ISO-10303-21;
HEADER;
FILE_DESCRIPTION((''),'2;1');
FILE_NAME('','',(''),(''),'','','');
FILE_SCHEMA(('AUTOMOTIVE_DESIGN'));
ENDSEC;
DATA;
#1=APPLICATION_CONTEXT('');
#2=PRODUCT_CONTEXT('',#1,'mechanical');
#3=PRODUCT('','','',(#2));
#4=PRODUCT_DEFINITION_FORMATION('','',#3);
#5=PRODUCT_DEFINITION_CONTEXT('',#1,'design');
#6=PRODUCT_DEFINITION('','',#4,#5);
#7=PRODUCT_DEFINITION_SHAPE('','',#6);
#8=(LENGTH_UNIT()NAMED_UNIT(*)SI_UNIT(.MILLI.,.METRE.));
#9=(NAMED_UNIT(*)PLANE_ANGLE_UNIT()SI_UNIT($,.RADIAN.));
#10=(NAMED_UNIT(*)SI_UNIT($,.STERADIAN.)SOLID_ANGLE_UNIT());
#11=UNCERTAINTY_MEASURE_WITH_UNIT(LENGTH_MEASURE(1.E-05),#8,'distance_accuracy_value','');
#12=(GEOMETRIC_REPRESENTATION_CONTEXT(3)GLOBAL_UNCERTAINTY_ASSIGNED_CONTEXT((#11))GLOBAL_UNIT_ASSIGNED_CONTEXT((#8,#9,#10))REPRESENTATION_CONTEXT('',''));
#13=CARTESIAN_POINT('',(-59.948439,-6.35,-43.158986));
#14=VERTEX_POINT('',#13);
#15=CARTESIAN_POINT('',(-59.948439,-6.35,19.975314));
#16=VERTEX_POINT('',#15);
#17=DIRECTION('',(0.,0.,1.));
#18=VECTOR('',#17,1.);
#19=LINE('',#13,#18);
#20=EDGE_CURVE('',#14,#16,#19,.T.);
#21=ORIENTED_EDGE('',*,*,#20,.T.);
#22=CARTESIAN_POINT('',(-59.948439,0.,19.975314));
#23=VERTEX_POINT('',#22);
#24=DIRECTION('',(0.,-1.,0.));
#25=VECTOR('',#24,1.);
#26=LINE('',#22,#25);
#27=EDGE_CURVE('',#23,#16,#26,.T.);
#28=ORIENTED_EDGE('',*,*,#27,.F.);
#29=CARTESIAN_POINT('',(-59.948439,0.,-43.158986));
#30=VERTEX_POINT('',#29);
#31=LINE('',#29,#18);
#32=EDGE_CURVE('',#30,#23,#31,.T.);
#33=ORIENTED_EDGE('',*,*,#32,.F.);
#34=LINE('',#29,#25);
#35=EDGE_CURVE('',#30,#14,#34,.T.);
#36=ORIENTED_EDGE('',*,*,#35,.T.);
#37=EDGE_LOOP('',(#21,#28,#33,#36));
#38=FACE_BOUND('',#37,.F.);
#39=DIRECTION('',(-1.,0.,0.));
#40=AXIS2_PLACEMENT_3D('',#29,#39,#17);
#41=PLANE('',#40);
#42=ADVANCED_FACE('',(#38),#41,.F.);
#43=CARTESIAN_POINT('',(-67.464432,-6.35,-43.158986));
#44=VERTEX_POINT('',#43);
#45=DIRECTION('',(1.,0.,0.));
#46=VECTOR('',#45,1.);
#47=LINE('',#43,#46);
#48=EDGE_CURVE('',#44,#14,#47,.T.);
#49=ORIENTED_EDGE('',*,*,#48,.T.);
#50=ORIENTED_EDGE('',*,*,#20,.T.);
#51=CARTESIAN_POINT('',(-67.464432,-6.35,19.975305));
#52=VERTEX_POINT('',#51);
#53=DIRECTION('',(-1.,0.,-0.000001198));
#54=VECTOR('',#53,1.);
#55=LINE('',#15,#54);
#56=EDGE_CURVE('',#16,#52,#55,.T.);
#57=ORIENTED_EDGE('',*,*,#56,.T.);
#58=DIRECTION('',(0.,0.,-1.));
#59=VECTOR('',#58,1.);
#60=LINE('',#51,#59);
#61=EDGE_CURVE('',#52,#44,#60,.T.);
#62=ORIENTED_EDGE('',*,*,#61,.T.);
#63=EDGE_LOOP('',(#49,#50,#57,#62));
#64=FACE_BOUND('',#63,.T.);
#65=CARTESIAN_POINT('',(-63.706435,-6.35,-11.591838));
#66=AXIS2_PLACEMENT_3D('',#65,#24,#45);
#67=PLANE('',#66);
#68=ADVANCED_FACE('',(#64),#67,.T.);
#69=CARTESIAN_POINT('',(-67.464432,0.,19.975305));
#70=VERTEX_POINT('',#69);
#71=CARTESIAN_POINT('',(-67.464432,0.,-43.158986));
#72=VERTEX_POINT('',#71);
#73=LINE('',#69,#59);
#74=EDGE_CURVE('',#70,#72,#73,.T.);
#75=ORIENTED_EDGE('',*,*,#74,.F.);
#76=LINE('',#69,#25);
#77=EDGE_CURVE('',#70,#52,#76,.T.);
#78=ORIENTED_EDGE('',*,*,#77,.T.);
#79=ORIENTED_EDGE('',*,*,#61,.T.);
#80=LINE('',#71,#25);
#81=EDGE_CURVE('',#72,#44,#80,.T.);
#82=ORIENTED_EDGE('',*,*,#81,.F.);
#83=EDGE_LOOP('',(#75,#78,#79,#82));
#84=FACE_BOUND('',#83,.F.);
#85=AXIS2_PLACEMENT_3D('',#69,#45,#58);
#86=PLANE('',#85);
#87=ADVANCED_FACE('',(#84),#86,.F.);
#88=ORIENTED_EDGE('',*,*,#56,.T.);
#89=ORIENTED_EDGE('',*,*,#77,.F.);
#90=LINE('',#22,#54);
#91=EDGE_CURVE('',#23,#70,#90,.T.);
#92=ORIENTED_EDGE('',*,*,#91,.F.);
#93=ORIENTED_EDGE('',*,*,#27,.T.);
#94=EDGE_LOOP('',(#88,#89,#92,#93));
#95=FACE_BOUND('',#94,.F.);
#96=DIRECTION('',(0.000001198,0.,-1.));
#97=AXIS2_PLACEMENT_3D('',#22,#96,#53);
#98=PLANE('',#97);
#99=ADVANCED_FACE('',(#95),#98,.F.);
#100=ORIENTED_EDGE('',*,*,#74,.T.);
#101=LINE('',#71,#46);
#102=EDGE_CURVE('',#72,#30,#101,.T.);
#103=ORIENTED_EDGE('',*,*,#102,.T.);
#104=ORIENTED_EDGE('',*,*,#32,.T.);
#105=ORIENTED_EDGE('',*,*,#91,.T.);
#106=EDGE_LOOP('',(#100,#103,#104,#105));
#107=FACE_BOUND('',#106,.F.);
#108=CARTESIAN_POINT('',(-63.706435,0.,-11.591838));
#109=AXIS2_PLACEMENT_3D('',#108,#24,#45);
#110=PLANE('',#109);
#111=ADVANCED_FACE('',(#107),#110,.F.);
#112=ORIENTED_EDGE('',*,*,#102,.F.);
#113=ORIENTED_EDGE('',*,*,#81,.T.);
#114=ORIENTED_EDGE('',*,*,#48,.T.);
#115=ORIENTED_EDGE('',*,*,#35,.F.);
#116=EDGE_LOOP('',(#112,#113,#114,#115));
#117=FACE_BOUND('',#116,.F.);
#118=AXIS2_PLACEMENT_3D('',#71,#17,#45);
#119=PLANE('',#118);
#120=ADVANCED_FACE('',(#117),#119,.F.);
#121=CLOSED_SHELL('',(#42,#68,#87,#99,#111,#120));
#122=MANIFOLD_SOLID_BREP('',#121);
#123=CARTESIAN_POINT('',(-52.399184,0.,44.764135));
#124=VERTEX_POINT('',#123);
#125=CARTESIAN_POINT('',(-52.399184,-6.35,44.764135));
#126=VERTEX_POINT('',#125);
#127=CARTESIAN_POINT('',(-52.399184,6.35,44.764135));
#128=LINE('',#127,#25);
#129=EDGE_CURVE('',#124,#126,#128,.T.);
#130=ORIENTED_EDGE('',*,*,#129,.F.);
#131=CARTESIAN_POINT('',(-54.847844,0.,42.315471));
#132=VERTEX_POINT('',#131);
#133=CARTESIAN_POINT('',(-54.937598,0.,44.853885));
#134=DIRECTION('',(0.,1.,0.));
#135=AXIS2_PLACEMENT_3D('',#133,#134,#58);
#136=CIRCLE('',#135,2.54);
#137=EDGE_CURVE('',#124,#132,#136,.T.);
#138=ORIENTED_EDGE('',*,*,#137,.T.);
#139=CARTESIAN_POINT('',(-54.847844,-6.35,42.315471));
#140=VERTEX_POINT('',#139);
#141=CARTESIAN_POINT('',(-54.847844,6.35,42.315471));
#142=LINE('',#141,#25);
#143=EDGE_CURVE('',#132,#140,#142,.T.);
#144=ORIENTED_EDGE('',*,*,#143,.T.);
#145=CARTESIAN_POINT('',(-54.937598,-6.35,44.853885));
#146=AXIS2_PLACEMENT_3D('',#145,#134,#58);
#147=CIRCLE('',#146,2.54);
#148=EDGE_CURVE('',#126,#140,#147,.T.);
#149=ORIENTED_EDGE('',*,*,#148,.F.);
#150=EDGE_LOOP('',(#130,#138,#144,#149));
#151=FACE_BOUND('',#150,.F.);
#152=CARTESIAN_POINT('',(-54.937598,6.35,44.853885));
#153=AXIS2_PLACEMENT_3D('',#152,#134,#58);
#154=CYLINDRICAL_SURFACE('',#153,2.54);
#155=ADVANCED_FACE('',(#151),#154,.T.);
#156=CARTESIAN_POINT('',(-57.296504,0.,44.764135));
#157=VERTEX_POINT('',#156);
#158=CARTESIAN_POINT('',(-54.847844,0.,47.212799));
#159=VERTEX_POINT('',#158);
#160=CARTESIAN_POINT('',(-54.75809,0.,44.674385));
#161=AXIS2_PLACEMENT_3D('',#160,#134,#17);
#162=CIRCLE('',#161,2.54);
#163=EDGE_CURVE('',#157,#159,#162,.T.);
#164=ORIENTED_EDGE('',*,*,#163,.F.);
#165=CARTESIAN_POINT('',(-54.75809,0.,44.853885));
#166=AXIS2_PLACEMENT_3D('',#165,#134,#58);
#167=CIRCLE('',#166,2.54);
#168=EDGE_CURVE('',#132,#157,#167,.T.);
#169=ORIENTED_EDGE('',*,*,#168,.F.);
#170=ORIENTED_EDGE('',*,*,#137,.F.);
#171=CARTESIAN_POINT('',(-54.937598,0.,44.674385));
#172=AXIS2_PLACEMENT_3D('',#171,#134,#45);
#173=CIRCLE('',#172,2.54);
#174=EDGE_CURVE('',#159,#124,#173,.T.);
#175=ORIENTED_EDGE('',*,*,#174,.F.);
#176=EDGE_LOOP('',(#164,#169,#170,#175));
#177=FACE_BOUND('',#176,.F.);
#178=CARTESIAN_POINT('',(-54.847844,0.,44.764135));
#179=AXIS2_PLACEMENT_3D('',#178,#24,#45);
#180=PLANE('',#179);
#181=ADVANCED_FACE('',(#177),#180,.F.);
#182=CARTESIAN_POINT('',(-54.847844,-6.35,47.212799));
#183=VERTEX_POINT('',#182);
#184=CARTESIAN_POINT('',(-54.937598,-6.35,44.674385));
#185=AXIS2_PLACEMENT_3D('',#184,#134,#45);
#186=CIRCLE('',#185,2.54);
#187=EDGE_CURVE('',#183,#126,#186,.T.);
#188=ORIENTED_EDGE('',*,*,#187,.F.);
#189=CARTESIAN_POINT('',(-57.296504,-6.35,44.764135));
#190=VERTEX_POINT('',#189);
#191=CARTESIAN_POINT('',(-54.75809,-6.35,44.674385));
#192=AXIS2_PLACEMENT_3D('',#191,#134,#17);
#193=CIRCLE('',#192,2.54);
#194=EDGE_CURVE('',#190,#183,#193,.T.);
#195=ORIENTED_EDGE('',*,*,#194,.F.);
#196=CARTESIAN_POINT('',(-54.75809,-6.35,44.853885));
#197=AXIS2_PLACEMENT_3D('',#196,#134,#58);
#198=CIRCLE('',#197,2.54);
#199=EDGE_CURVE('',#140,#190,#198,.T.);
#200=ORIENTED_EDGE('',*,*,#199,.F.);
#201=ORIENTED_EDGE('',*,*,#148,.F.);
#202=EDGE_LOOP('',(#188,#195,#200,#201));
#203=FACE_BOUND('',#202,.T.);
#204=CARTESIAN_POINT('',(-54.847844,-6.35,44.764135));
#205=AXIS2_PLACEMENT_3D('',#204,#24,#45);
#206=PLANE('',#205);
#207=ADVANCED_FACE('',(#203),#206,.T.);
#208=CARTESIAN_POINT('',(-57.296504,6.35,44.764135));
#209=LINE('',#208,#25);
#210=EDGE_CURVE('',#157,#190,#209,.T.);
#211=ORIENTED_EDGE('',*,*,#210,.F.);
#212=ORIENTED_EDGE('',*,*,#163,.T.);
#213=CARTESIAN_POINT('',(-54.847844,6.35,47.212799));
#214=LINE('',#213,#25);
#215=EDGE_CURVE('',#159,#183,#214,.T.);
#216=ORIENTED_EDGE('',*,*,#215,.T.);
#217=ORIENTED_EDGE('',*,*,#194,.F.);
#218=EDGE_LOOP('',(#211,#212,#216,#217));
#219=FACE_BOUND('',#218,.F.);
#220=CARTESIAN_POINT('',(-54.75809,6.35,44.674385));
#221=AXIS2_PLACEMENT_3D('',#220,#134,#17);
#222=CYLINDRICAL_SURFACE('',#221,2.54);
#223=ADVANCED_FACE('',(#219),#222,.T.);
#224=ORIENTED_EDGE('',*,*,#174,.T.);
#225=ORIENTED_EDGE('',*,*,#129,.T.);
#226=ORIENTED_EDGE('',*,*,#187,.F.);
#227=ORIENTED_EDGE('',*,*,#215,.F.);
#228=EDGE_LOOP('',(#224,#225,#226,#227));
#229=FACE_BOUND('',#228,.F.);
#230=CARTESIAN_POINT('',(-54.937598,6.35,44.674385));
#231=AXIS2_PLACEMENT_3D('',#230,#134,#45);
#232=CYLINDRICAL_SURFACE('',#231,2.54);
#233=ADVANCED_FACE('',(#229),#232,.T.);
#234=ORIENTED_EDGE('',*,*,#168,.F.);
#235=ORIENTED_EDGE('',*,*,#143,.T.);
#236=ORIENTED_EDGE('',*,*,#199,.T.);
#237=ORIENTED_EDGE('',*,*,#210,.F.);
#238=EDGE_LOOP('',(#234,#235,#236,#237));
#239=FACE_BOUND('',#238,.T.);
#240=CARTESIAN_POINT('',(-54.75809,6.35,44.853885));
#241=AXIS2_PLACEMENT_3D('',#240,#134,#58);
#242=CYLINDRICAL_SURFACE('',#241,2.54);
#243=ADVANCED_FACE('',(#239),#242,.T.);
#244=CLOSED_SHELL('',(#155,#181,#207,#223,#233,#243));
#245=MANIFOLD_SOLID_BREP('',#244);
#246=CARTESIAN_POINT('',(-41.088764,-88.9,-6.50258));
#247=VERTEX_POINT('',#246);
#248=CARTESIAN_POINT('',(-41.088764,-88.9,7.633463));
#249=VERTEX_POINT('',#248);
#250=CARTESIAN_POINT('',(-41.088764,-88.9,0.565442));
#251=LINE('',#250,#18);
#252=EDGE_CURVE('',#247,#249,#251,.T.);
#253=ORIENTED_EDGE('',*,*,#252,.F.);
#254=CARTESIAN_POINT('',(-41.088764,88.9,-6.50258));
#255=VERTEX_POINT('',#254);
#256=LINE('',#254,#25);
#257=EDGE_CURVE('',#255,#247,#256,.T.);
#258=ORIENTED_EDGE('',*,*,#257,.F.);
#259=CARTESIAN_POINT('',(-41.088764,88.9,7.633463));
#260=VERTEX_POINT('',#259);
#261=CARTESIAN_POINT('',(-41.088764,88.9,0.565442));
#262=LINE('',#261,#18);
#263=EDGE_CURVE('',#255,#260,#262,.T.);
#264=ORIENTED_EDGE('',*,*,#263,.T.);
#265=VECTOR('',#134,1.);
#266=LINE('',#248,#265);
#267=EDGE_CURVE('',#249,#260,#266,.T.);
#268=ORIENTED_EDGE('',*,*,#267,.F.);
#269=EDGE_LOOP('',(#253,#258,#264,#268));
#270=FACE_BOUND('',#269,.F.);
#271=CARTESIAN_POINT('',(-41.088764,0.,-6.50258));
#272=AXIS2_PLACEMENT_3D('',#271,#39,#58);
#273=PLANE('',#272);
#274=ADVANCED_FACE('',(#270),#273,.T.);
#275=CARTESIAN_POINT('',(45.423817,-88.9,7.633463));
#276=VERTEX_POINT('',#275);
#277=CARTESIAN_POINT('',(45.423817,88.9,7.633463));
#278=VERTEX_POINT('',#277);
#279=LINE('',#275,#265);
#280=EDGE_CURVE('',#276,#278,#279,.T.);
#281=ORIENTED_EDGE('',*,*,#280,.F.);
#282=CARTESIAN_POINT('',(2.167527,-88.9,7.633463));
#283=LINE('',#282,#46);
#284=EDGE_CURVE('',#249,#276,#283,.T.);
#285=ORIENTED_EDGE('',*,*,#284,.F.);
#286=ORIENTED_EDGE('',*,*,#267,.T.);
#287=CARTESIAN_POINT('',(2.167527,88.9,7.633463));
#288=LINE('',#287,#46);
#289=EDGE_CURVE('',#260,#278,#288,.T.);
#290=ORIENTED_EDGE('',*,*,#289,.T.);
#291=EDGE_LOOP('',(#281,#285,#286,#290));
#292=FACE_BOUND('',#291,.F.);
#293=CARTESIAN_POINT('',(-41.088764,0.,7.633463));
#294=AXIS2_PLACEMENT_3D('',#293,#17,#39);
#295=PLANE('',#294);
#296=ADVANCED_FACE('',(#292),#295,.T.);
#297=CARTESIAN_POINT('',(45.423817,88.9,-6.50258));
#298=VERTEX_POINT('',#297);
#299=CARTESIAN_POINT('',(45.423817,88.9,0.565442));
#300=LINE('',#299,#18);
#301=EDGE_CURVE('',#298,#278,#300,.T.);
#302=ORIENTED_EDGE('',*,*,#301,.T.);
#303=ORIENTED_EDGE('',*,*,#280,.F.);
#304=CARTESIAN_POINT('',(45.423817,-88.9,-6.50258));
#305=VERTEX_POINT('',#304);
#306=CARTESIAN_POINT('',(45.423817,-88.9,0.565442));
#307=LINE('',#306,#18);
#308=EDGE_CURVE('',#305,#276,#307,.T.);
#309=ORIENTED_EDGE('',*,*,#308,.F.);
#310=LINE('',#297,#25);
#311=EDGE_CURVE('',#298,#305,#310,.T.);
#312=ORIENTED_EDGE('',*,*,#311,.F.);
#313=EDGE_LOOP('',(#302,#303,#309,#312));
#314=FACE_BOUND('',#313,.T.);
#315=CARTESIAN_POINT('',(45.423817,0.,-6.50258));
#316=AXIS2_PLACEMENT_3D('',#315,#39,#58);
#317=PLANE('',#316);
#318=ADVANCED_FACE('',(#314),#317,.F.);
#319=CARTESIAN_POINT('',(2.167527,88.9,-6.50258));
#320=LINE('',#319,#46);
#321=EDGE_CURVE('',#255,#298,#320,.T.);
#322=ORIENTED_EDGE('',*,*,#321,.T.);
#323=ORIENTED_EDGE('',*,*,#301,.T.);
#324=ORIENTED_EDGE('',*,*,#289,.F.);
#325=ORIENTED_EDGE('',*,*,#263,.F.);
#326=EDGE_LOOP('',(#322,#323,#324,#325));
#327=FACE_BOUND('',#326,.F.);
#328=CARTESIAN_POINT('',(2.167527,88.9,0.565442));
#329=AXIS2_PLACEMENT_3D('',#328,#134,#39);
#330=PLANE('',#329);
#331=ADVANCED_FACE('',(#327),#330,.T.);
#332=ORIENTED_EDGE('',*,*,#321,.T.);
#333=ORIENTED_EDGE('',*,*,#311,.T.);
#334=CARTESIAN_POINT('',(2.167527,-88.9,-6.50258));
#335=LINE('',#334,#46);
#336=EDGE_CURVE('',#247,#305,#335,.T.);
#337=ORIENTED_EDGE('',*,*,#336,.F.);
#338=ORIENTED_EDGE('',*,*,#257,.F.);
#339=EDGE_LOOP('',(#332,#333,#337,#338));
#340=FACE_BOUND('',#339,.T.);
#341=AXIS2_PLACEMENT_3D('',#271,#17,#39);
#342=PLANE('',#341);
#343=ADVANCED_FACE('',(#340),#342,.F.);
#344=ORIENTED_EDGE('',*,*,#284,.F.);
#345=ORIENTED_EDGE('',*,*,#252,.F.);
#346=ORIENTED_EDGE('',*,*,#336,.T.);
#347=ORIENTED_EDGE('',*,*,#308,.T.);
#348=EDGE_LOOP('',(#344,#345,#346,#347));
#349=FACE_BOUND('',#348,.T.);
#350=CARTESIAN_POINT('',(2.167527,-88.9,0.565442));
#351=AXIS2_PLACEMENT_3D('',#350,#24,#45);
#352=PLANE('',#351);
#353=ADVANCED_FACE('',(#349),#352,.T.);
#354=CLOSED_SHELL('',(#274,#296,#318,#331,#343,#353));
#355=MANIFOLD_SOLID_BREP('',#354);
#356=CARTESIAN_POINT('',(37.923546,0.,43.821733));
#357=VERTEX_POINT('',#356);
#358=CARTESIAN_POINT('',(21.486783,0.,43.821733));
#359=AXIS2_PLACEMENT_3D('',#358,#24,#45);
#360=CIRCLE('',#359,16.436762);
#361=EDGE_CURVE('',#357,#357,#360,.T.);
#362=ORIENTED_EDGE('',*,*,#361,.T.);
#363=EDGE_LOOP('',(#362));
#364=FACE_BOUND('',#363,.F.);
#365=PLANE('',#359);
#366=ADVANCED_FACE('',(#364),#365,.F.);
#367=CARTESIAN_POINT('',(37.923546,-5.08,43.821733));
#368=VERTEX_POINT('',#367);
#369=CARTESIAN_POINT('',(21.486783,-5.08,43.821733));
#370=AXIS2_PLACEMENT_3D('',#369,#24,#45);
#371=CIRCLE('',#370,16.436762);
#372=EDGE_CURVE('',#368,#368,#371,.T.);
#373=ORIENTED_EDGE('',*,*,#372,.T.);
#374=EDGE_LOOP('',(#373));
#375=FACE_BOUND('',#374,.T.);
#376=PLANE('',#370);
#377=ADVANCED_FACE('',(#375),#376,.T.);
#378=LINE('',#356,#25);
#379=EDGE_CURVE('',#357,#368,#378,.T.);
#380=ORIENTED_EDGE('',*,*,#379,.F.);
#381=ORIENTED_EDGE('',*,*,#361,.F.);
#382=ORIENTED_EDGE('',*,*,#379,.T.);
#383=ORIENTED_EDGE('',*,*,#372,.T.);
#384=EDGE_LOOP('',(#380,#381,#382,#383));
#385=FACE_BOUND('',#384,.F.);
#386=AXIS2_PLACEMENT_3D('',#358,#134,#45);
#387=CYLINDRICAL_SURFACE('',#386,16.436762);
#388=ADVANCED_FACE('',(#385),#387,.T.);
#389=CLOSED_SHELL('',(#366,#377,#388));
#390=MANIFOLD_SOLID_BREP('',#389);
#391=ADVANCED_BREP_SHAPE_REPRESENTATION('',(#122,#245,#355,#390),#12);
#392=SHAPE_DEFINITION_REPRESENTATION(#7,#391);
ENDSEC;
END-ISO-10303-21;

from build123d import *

# Parameters (mm, degrees)
F0_W        = 86.512580514
F0_H        = 14.1360429116
F1_DEPTH    = 88.9
F4_DEPTH    = 6.35
F5_R        = 16.4367622898
F6_DEPTH    = 5.08
F7_W        = 4.9004927278
F7_H        = 4.9005001783
F8_DEPTH    = 6.35
F9_T1_DEPTH = 19.05


# Not quite as in the source:
# - a fillet or chamfer that OpenCascade refuses, or shapes differently, is made with other operations: its cross-section is extruded or revolved along the edge and cut away or added


with BuildPart() as f1:
    # F0 (on Front) → F1 (new body)
    with BuildSketch(Plane.XZ):
        with Locations((2.1675266325, 0.5654415581)):
            Rectangle(F0_W, F0_H)
    extrude(amount=F1_DEPTH)

    # F2: F1 across plane


with BuildPart() as f1_1:
    add(f1.part)
    add(f1.part.mirror(Plane.XZ))


with BuildPart() as f4:
    # F3 (on Front) → F4 (new body)
    with BuildSketch(Plane.XZ):
        Polygon((-67.4644317088, 19.9753048493), (-67.4644317088, -43.1589859507), (-59.9484388175, -43.1589859507), (-59.9484388175, 19.9753138556), align=None)
    extrude(amount=F4_DEPTH)


with BuildPart() as f6:
    # F5 (on Front) → F6 (new body)
    with BuildSketch(Plane.XZ):
        with Locations((21.4867834002, 43.8217334449)):
            Circle(F5_R)
    extrude(amount=F6_DEPTH)


with BuildPart() as f8:
    # F7 (on Front) → F8 (new body)
    with BuildSketch(Plane.XZ):
        with Locations((-54.847843945, 44.7641350329)):
            Rectangle(F7_W, F7_H)
    extrude(amount=F8_DEPTH)

    # F9: fillet of radius 2.54 on 4 edges, made by hand

    # F9_s2 → F9_t1 (cut)
    with BuildSketch(Plane.XZ.offset(-6.35)):
        with BuildLine():
            ThreePointArc((-54.7580903089, 47.2143851221), (-56.5541415331, 46.4704363463), (-57.2980903089, 44.6743851221))
            Line((-57.2980903089, 44.6743851221), (-57.2980903089, 47.2143851221))
            Line((-57.2980903089, 47.2143851221), (-54.7580903089, 47.2143851221))
        make_face()
        with BuildLine():
            ThreePointArc((-52.3975975811, 44.6743851221), (-53.1415463569, 46.4704363463), (-54.9375975811, 47.2143851221))
            Line((-54.9375975811, 47.2143851221), (-52.3975975811, 47.2143851221))
            Line((-52.3975975811, 47.2143851221), (-52.3975975811, 44.6743851221))
        make_face()
        with BuildLine():
            ThreePointArc((-54.7580903089, 42.3138849437), (-56.5541415331, 43.0578337195), (-57.2980903089, 44.8538849437))
            Line((-57.2980903089, 44.8538849437), (-57.2980903089, 42.3138849437))
            Line((-57.2980903089, 42.3138849437), (-54.7580903089, 42.3138849437))
        make_face()
        with BuildLine():
            ThreePointArc((-54.9375975811, 42.3138849437), (-53.1415463569, 43.0578337195), (-52.3975975811, 44.8538849437))
            Line((-52.3975975811, 44.8538849437), (-52.3975975811, 42.3138849437))
            Line((-52.3975975811, 42.3138849437), (-54.9375975811, 42.3138849437))
        make_face()
    extrude(amount=F9_T1_DEPTH, mode=Mode.SUBTRACT)


solid = Compound([f1_1.part, f4.part, f6.part, f8.part])
